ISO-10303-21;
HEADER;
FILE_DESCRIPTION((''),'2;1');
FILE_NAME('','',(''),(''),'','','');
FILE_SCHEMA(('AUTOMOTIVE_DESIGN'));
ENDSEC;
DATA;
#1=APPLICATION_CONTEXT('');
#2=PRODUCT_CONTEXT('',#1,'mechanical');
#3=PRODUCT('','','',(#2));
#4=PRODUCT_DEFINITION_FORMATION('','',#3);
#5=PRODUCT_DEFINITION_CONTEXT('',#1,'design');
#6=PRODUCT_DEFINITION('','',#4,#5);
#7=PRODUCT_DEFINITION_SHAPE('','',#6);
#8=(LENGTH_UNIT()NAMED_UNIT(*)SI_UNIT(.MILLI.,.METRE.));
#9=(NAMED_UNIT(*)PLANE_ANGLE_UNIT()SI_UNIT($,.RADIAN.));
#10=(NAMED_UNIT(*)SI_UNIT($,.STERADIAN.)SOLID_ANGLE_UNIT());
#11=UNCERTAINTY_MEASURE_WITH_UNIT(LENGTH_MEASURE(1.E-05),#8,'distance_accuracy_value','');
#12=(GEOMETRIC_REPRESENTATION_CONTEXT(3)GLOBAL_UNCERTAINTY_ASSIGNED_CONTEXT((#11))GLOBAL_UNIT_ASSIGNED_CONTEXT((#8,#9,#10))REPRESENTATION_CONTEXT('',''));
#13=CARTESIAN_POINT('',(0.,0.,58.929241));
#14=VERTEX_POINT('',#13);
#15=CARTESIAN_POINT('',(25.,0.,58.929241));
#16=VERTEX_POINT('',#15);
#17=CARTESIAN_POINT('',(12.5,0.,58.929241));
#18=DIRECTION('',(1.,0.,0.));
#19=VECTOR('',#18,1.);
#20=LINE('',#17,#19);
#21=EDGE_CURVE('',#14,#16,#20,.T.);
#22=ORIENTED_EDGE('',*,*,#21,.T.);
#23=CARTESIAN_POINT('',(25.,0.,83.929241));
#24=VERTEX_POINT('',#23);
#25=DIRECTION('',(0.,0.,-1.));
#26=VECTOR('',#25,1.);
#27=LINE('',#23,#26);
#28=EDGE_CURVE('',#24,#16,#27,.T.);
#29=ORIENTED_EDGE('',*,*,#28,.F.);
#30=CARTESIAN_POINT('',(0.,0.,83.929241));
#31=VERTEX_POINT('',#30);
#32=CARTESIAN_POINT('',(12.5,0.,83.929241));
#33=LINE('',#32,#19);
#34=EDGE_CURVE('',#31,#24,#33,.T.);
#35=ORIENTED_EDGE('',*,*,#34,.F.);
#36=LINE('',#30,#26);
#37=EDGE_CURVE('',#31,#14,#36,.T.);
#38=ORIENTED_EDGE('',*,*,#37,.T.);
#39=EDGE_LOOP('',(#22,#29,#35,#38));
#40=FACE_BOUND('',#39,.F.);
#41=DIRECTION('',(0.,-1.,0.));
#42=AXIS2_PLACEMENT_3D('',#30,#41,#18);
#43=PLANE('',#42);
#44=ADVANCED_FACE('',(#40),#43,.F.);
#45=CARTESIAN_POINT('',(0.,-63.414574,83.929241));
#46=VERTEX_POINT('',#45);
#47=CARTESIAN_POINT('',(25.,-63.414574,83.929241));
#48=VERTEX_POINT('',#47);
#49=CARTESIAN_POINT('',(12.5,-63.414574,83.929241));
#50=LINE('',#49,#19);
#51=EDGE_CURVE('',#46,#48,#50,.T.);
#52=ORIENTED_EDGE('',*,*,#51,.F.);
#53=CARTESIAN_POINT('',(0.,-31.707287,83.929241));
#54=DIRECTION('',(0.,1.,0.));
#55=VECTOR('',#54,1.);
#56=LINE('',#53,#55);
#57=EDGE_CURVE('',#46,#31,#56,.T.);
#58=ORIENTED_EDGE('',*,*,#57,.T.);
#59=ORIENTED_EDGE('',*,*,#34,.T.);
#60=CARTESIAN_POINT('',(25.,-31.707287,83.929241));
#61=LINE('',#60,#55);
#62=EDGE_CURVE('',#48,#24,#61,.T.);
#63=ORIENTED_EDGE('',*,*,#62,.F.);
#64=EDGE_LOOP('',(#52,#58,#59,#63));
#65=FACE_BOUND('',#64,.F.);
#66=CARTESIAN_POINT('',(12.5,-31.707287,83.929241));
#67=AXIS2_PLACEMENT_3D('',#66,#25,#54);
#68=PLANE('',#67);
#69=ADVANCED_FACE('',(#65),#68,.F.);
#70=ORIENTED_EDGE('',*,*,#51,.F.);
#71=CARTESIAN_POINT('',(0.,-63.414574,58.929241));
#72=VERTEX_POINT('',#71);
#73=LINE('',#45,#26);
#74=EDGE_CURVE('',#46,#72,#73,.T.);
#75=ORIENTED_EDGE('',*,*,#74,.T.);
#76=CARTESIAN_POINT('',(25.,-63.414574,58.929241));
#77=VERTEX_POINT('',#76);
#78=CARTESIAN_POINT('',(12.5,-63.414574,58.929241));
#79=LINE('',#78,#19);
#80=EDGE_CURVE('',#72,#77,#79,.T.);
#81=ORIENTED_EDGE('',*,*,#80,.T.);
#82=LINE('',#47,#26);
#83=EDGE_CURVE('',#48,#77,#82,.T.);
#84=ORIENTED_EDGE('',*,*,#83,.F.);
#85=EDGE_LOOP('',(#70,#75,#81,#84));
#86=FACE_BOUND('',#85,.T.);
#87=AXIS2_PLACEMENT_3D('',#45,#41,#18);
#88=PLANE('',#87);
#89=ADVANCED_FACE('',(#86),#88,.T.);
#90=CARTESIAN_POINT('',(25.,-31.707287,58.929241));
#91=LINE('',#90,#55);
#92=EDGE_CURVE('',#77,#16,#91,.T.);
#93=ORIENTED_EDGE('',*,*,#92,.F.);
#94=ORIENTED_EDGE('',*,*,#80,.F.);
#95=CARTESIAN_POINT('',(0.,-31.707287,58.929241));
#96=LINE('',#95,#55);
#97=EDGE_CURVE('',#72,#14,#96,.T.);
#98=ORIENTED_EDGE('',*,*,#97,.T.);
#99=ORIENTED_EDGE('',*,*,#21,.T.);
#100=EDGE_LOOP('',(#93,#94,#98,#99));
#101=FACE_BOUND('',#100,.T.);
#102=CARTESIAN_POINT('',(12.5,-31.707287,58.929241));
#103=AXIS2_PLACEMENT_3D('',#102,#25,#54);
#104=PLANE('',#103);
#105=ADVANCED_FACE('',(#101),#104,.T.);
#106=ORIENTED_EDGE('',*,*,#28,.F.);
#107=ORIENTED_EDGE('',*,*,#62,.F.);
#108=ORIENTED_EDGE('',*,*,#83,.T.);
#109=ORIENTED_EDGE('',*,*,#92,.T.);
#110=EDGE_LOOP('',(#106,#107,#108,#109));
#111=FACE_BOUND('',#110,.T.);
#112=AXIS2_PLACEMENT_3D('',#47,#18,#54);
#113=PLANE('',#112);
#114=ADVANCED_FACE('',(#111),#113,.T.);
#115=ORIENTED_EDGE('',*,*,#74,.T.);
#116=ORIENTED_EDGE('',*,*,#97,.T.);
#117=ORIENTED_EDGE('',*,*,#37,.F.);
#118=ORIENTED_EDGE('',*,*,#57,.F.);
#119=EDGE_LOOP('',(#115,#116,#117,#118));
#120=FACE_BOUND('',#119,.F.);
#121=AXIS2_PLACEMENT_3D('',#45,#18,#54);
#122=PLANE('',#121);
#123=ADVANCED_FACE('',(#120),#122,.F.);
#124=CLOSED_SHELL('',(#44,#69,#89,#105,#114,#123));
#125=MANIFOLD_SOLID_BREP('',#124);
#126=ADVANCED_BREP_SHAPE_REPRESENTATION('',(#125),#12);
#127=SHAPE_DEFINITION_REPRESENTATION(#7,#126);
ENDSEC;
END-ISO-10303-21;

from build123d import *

# Parameters (mm, degrees)
F1_E0_BOTTOM_W = 63.4145736694
F1_E0_BOTTOM_H = 25
F2_DEPTH       = 25


with BuildPart() as f2:
    # F1_E0_bottom (on explicit) → F2 (new body)
    with BuildSketch(Plane(origin=(0, -63.4145736694, 83.9292407036), x_dir=(0, 1, 0), z_dir=(0, 0, -1))):
        with Locations((31.7072868347, 12.5)):
            Rectangle(F1_E0_BOTTOM_W, F1_E0_BOTTOM_H)
    extrude(amount=F2_DEPTH)


solid = f2.part
